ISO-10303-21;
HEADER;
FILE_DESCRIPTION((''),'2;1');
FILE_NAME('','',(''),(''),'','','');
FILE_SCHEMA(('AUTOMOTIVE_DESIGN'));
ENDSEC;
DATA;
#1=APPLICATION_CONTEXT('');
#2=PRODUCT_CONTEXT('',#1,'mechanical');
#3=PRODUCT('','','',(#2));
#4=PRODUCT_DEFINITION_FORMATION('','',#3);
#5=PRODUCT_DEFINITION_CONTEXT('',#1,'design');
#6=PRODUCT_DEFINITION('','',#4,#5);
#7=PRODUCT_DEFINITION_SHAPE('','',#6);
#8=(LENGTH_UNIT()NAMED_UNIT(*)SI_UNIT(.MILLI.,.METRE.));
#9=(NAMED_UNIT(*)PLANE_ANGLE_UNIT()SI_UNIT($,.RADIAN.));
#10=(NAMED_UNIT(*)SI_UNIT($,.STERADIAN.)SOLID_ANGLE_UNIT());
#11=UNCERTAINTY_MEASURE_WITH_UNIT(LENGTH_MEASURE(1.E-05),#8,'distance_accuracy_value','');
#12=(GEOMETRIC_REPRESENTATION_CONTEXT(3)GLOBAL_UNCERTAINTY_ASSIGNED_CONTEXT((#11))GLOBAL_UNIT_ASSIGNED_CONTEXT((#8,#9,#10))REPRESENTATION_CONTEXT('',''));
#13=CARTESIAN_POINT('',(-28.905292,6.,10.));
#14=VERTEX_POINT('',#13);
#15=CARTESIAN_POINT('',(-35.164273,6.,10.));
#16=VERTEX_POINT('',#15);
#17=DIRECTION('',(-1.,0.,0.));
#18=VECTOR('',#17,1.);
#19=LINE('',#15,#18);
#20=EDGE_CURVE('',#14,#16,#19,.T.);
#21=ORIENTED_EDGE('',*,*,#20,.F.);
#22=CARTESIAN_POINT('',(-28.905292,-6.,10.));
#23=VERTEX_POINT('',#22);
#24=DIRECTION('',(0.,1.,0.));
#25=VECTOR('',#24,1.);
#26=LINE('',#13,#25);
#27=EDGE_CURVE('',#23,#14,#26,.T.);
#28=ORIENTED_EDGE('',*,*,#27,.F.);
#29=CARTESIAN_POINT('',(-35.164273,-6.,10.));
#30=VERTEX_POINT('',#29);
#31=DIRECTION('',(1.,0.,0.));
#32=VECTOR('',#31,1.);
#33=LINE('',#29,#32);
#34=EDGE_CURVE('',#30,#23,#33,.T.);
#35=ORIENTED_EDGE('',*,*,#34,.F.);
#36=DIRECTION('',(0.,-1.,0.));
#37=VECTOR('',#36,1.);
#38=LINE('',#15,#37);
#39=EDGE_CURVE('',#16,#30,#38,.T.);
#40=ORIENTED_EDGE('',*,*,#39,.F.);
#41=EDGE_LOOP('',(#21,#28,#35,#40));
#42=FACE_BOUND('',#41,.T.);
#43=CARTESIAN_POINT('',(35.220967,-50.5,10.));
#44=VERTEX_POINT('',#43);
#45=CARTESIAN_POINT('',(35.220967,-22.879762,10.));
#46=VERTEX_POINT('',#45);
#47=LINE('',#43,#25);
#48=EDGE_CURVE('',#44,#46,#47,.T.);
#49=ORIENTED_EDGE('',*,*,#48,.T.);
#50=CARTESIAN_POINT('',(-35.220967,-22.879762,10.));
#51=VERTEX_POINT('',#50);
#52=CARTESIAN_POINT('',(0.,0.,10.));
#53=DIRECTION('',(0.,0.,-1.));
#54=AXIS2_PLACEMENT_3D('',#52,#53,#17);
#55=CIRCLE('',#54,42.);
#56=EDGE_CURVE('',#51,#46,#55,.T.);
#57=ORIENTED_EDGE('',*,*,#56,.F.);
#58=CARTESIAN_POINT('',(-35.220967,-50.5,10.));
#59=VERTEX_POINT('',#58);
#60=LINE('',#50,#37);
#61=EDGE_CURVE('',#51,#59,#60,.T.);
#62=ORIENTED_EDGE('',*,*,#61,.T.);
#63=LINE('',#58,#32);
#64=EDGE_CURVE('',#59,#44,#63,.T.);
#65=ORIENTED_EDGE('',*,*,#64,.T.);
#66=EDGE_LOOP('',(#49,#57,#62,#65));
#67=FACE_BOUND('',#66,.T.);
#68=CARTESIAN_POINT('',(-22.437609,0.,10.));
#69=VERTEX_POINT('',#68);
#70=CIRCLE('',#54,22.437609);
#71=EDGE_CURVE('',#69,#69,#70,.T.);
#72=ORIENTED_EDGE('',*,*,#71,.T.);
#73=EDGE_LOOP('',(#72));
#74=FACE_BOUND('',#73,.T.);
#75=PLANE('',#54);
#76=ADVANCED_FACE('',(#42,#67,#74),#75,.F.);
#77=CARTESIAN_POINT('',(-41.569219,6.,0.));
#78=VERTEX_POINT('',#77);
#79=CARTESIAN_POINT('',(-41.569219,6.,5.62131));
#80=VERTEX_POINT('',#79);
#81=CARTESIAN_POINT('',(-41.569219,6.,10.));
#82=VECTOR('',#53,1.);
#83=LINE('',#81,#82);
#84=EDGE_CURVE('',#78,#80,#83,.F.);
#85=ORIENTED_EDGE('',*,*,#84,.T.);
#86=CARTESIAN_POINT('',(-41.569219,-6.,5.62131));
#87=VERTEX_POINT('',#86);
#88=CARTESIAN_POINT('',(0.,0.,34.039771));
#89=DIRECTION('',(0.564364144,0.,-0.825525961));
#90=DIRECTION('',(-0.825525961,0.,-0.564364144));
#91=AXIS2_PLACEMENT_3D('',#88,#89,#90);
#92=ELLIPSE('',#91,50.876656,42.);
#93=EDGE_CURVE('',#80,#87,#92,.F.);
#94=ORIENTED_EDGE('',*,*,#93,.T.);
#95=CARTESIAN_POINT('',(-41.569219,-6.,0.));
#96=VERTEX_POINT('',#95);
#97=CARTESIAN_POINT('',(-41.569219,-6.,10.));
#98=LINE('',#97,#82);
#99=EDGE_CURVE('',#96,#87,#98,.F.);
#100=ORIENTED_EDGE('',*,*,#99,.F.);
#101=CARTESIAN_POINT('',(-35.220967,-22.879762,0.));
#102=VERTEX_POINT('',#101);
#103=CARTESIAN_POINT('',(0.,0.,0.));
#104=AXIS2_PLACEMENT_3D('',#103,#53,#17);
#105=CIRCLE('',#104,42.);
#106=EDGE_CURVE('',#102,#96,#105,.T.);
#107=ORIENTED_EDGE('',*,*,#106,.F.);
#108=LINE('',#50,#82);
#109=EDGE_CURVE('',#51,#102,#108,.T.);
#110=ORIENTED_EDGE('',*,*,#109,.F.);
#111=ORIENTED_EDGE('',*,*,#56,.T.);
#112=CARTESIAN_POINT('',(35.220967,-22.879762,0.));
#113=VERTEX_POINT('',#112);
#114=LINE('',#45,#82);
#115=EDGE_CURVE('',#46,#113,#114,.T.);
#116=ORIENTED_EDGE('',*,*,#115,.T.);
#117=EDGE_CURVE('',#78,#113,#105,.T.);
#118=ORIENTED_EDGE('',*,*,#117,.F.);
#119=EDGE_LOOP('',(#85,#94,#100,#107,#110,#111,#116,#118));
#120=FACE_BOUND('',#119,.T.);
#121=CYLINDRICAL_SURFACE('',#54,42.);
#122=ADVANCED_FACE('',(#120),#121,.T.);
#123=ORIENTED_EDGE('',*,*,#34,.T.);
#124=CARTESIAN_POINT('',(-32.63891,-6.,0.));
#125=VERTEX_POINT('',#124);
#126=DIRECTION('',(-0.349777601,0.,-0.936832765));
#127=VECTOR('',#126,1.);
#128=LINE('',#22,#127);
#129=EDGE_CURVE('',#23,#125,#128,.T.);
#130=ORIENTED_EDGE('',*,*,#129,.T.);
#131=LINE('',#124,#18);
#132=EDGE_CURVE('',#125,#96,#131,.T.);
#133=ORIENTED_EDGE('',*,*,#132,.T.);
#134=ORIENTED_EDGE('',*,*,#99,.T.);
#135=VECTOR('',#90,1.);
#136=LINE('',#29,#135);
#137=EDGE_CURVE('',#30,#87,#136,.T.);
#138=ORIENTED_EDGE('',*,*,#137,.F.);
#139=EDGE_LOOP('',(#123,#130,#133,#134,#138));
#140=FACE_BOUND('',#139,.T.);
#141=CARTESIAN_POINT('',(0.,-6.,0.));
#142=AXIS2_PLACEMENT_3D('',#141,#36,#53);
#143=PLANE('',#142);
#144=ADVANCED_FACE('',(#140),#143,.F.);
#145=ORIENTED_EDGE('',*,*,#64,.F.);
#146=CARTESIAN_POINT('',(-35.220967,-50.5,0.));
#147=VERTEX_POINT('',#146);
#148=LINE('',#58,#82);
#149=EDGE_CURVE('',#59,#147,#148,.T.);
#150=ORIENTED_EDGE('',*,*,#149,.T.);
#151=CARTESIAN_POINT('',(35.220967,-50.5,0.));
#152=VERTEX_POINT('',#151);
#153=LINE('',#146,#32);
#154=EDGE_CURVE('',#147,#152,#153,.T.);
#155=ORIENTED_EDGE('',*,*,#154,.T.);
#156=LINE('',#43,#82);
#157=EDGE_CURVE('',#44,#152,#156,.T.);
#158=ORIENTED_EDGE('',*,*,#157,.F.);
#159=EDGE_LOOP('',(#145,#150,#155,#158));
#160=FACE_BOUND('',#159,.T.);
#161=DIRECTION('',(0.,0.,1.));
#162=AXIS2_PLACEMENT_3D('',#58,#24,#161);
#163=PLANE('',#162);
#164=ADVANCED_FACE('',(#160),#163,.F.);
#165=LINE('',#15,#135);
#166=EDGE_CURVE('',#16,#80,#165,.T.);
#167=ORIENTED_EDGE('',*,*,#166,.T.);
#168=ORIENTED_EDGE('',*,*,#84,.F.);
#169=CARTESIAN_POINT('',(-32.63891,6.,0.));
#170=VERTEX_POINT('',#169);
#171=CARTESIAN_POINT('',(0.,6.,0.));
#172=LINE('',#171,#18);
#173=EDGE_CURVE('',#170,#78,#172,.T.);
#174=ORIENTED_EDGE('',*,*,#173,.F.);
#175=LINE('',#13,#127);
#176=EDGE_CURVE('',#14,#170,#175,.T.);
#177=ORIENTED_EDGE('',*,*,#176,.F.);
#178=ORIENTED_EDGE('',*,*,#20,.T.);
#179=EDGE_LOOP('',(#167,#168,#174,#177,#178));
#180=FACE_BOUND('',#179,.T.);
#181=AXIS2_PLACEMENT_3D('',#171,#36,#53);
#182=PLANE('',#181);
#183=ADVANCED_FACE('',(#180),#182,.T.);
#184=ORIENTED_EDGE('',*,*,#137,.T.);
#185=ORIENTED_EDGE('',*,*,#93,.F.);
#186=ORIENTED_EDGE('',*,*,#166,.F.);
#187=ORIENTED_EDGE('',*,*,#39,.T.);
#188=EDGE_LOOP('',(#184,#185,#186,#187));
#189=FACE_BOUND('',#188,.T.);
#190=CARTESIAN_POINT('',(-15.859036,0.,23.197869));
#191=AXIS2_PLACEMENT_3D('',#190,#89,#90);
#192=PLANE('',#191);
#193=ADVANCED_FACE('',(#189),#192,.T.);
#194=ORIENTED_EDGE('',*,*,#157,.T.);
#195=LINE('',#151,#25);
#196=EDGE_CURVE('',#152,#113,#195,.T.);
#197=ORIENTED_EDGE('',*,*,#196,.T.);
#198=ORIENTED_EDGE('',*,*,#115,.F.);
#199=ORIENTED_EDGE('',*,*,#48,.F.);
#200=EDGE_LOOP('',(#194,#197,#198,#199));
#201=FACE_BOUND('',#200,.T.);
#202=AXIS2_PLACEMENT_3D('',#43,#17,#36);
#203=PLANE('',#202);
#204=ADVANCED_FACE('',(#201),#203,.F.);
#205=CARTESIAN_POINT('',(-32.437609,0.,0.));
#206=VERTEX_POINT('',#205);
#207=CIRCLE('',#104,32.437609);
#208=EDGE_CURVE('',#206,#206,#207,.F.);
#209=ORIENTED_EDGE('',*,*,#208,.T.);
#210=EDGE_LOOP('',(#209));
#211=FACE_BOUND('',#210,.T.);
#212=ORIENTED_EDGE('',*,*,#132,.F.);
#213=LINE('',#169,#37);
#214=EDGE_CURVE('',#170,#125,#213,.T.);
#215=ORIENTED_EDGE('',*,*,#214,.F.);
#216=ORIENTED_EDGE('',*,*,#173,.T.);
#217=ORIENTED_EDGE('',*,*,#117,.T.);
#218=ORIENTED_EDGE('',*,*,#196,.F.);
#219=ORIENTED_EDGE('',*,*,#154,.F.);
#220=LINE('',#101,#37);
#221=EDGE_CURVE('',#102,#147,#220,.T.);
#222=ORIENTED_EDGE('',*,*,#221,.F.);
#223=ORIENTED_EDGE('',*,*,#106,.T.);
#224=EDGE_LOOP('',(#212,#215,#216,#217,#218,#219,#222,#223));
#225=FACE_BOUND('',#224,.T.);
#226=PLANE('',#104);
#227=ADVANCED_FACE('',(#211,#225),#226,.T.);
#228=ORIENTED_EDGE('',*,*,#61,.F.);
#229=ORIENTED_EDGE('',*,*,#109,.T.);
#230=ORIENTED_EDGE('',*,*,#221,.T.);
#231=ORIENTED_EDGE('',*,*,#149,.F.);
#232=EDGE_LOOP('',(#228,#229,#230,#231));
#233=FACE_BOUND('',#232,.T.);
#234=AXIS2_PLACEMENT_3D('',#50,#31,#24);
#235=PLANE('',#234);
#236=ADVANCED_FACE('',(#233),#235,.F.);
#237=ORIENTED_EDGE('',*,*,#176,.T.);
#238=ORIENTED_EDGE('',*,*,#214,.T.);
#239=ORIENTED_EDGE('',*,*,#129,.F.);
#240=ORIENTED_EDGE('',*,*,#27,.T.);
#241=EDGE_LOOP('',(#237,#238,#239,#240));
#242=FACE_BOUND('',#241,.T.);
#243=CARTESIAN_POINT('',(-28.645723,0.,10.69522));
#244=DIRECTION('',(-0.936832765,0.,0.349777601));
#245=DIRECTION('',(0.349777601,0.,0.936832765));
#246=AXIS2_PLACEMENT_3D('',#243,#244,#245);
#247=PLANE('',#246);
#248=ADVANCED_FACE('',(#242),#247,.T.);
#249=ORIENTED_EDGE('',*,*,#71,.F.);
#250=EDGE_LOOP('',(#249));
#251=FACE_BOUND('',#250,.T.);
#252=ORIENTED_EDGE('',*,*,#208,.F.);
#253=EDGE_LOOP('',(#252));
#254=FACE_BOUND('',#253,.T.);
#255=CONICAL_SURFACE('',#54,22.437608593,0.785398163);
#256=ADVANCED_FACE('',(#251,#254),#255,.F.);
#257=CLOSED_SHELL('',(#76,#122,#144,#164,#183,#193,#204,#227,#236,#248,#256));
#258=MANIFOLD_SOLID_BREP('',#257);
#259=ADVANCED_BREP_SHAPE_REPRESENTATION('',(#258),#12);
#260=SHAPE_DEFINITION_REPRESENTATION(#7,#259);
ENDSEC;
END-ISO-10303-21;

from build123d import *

# Parameters (mm, degrees)
BOSS_EXTRUDE1_DEPTH = 10
SKETCH4_R           = 22.437608593
CUT_EXTRUDE1_DEPTH  = 30
CHAMFER1_SIZE       = 10


with BuildPart() as part:
    # Sketch1 → Boss-Extrude1 (new body)
    with BuildSketch(Plane.XY):
        with BuildLine():
            Line((-35.220966732, -22.879761853), (-35.220966732, -50.5))
            Line((-35.220966732, -50.5), (35.220966732, -50.5))
            Line((35.220966732, -50.5), (35.220966732, -22.879761853))
            ThreePointArc((35.220966732, -22.879761853), (0, 42), (-35.220966732, -22.879761853))
        make_face()
    extrude(amount=BOSS_EXTRUDE1_DEPTH)

    # Sketch3 → Cut-Loft1 section 0
    with BuildSketch(Plane.XY.offset(10)):
        with BuildLine():
            Line((-35.164273033, 6), (-28.90529198, 6))
            Line((-28.90529198, 6), (-28.90529198, -6))
            Line((-28.90529198, -6), (-35.164273033, -6))
            Line((-35.164273033, -6), (-35.164273033, 6))
        make_face()
    # Sketch2 → Cut-Loft1 section 1
    with BuildSketch(Plane(origin=(0, 0, 0), x_dir=(-1, 0, 0), z_dir=(0, 0, -1))):
        with BuildLine():
            Line((32.638910343, 6), (49.791813943, 6))
            Line((49.791813943, 6), (49.791813943, -6))
            Line((49.791813943, -6), (32.638910343, -6))
            Line((32.638910343, -6), (32.638910343, 6))
        make_face()
    loft(mode=Mode.SUBTRACT)

    # Sketch4 → Cut-Extrude1 (cut)
    with BuildSketch(Plane(origin=(0, 0, 0), x_dir=(-1, 0, 0), z_dir=(0, 0, -1))):
        Circle(SKETCH4_R)
    extrude(amount=-CUT_EXTRUDE1_DEPTH, mode=Mode.SUBTRACT)

    # Chamfer1
    chamfer1_edges = [part.edges().sort_by_distance(p)[0] for p in [
        (22.437608593, 0, 0),
    ]]
    chamfer(chamfer1_edges, length=CHAMFER1_SIZE - 0.0001)  # a hair under: the kernel refuses the full size


solid = part.part
